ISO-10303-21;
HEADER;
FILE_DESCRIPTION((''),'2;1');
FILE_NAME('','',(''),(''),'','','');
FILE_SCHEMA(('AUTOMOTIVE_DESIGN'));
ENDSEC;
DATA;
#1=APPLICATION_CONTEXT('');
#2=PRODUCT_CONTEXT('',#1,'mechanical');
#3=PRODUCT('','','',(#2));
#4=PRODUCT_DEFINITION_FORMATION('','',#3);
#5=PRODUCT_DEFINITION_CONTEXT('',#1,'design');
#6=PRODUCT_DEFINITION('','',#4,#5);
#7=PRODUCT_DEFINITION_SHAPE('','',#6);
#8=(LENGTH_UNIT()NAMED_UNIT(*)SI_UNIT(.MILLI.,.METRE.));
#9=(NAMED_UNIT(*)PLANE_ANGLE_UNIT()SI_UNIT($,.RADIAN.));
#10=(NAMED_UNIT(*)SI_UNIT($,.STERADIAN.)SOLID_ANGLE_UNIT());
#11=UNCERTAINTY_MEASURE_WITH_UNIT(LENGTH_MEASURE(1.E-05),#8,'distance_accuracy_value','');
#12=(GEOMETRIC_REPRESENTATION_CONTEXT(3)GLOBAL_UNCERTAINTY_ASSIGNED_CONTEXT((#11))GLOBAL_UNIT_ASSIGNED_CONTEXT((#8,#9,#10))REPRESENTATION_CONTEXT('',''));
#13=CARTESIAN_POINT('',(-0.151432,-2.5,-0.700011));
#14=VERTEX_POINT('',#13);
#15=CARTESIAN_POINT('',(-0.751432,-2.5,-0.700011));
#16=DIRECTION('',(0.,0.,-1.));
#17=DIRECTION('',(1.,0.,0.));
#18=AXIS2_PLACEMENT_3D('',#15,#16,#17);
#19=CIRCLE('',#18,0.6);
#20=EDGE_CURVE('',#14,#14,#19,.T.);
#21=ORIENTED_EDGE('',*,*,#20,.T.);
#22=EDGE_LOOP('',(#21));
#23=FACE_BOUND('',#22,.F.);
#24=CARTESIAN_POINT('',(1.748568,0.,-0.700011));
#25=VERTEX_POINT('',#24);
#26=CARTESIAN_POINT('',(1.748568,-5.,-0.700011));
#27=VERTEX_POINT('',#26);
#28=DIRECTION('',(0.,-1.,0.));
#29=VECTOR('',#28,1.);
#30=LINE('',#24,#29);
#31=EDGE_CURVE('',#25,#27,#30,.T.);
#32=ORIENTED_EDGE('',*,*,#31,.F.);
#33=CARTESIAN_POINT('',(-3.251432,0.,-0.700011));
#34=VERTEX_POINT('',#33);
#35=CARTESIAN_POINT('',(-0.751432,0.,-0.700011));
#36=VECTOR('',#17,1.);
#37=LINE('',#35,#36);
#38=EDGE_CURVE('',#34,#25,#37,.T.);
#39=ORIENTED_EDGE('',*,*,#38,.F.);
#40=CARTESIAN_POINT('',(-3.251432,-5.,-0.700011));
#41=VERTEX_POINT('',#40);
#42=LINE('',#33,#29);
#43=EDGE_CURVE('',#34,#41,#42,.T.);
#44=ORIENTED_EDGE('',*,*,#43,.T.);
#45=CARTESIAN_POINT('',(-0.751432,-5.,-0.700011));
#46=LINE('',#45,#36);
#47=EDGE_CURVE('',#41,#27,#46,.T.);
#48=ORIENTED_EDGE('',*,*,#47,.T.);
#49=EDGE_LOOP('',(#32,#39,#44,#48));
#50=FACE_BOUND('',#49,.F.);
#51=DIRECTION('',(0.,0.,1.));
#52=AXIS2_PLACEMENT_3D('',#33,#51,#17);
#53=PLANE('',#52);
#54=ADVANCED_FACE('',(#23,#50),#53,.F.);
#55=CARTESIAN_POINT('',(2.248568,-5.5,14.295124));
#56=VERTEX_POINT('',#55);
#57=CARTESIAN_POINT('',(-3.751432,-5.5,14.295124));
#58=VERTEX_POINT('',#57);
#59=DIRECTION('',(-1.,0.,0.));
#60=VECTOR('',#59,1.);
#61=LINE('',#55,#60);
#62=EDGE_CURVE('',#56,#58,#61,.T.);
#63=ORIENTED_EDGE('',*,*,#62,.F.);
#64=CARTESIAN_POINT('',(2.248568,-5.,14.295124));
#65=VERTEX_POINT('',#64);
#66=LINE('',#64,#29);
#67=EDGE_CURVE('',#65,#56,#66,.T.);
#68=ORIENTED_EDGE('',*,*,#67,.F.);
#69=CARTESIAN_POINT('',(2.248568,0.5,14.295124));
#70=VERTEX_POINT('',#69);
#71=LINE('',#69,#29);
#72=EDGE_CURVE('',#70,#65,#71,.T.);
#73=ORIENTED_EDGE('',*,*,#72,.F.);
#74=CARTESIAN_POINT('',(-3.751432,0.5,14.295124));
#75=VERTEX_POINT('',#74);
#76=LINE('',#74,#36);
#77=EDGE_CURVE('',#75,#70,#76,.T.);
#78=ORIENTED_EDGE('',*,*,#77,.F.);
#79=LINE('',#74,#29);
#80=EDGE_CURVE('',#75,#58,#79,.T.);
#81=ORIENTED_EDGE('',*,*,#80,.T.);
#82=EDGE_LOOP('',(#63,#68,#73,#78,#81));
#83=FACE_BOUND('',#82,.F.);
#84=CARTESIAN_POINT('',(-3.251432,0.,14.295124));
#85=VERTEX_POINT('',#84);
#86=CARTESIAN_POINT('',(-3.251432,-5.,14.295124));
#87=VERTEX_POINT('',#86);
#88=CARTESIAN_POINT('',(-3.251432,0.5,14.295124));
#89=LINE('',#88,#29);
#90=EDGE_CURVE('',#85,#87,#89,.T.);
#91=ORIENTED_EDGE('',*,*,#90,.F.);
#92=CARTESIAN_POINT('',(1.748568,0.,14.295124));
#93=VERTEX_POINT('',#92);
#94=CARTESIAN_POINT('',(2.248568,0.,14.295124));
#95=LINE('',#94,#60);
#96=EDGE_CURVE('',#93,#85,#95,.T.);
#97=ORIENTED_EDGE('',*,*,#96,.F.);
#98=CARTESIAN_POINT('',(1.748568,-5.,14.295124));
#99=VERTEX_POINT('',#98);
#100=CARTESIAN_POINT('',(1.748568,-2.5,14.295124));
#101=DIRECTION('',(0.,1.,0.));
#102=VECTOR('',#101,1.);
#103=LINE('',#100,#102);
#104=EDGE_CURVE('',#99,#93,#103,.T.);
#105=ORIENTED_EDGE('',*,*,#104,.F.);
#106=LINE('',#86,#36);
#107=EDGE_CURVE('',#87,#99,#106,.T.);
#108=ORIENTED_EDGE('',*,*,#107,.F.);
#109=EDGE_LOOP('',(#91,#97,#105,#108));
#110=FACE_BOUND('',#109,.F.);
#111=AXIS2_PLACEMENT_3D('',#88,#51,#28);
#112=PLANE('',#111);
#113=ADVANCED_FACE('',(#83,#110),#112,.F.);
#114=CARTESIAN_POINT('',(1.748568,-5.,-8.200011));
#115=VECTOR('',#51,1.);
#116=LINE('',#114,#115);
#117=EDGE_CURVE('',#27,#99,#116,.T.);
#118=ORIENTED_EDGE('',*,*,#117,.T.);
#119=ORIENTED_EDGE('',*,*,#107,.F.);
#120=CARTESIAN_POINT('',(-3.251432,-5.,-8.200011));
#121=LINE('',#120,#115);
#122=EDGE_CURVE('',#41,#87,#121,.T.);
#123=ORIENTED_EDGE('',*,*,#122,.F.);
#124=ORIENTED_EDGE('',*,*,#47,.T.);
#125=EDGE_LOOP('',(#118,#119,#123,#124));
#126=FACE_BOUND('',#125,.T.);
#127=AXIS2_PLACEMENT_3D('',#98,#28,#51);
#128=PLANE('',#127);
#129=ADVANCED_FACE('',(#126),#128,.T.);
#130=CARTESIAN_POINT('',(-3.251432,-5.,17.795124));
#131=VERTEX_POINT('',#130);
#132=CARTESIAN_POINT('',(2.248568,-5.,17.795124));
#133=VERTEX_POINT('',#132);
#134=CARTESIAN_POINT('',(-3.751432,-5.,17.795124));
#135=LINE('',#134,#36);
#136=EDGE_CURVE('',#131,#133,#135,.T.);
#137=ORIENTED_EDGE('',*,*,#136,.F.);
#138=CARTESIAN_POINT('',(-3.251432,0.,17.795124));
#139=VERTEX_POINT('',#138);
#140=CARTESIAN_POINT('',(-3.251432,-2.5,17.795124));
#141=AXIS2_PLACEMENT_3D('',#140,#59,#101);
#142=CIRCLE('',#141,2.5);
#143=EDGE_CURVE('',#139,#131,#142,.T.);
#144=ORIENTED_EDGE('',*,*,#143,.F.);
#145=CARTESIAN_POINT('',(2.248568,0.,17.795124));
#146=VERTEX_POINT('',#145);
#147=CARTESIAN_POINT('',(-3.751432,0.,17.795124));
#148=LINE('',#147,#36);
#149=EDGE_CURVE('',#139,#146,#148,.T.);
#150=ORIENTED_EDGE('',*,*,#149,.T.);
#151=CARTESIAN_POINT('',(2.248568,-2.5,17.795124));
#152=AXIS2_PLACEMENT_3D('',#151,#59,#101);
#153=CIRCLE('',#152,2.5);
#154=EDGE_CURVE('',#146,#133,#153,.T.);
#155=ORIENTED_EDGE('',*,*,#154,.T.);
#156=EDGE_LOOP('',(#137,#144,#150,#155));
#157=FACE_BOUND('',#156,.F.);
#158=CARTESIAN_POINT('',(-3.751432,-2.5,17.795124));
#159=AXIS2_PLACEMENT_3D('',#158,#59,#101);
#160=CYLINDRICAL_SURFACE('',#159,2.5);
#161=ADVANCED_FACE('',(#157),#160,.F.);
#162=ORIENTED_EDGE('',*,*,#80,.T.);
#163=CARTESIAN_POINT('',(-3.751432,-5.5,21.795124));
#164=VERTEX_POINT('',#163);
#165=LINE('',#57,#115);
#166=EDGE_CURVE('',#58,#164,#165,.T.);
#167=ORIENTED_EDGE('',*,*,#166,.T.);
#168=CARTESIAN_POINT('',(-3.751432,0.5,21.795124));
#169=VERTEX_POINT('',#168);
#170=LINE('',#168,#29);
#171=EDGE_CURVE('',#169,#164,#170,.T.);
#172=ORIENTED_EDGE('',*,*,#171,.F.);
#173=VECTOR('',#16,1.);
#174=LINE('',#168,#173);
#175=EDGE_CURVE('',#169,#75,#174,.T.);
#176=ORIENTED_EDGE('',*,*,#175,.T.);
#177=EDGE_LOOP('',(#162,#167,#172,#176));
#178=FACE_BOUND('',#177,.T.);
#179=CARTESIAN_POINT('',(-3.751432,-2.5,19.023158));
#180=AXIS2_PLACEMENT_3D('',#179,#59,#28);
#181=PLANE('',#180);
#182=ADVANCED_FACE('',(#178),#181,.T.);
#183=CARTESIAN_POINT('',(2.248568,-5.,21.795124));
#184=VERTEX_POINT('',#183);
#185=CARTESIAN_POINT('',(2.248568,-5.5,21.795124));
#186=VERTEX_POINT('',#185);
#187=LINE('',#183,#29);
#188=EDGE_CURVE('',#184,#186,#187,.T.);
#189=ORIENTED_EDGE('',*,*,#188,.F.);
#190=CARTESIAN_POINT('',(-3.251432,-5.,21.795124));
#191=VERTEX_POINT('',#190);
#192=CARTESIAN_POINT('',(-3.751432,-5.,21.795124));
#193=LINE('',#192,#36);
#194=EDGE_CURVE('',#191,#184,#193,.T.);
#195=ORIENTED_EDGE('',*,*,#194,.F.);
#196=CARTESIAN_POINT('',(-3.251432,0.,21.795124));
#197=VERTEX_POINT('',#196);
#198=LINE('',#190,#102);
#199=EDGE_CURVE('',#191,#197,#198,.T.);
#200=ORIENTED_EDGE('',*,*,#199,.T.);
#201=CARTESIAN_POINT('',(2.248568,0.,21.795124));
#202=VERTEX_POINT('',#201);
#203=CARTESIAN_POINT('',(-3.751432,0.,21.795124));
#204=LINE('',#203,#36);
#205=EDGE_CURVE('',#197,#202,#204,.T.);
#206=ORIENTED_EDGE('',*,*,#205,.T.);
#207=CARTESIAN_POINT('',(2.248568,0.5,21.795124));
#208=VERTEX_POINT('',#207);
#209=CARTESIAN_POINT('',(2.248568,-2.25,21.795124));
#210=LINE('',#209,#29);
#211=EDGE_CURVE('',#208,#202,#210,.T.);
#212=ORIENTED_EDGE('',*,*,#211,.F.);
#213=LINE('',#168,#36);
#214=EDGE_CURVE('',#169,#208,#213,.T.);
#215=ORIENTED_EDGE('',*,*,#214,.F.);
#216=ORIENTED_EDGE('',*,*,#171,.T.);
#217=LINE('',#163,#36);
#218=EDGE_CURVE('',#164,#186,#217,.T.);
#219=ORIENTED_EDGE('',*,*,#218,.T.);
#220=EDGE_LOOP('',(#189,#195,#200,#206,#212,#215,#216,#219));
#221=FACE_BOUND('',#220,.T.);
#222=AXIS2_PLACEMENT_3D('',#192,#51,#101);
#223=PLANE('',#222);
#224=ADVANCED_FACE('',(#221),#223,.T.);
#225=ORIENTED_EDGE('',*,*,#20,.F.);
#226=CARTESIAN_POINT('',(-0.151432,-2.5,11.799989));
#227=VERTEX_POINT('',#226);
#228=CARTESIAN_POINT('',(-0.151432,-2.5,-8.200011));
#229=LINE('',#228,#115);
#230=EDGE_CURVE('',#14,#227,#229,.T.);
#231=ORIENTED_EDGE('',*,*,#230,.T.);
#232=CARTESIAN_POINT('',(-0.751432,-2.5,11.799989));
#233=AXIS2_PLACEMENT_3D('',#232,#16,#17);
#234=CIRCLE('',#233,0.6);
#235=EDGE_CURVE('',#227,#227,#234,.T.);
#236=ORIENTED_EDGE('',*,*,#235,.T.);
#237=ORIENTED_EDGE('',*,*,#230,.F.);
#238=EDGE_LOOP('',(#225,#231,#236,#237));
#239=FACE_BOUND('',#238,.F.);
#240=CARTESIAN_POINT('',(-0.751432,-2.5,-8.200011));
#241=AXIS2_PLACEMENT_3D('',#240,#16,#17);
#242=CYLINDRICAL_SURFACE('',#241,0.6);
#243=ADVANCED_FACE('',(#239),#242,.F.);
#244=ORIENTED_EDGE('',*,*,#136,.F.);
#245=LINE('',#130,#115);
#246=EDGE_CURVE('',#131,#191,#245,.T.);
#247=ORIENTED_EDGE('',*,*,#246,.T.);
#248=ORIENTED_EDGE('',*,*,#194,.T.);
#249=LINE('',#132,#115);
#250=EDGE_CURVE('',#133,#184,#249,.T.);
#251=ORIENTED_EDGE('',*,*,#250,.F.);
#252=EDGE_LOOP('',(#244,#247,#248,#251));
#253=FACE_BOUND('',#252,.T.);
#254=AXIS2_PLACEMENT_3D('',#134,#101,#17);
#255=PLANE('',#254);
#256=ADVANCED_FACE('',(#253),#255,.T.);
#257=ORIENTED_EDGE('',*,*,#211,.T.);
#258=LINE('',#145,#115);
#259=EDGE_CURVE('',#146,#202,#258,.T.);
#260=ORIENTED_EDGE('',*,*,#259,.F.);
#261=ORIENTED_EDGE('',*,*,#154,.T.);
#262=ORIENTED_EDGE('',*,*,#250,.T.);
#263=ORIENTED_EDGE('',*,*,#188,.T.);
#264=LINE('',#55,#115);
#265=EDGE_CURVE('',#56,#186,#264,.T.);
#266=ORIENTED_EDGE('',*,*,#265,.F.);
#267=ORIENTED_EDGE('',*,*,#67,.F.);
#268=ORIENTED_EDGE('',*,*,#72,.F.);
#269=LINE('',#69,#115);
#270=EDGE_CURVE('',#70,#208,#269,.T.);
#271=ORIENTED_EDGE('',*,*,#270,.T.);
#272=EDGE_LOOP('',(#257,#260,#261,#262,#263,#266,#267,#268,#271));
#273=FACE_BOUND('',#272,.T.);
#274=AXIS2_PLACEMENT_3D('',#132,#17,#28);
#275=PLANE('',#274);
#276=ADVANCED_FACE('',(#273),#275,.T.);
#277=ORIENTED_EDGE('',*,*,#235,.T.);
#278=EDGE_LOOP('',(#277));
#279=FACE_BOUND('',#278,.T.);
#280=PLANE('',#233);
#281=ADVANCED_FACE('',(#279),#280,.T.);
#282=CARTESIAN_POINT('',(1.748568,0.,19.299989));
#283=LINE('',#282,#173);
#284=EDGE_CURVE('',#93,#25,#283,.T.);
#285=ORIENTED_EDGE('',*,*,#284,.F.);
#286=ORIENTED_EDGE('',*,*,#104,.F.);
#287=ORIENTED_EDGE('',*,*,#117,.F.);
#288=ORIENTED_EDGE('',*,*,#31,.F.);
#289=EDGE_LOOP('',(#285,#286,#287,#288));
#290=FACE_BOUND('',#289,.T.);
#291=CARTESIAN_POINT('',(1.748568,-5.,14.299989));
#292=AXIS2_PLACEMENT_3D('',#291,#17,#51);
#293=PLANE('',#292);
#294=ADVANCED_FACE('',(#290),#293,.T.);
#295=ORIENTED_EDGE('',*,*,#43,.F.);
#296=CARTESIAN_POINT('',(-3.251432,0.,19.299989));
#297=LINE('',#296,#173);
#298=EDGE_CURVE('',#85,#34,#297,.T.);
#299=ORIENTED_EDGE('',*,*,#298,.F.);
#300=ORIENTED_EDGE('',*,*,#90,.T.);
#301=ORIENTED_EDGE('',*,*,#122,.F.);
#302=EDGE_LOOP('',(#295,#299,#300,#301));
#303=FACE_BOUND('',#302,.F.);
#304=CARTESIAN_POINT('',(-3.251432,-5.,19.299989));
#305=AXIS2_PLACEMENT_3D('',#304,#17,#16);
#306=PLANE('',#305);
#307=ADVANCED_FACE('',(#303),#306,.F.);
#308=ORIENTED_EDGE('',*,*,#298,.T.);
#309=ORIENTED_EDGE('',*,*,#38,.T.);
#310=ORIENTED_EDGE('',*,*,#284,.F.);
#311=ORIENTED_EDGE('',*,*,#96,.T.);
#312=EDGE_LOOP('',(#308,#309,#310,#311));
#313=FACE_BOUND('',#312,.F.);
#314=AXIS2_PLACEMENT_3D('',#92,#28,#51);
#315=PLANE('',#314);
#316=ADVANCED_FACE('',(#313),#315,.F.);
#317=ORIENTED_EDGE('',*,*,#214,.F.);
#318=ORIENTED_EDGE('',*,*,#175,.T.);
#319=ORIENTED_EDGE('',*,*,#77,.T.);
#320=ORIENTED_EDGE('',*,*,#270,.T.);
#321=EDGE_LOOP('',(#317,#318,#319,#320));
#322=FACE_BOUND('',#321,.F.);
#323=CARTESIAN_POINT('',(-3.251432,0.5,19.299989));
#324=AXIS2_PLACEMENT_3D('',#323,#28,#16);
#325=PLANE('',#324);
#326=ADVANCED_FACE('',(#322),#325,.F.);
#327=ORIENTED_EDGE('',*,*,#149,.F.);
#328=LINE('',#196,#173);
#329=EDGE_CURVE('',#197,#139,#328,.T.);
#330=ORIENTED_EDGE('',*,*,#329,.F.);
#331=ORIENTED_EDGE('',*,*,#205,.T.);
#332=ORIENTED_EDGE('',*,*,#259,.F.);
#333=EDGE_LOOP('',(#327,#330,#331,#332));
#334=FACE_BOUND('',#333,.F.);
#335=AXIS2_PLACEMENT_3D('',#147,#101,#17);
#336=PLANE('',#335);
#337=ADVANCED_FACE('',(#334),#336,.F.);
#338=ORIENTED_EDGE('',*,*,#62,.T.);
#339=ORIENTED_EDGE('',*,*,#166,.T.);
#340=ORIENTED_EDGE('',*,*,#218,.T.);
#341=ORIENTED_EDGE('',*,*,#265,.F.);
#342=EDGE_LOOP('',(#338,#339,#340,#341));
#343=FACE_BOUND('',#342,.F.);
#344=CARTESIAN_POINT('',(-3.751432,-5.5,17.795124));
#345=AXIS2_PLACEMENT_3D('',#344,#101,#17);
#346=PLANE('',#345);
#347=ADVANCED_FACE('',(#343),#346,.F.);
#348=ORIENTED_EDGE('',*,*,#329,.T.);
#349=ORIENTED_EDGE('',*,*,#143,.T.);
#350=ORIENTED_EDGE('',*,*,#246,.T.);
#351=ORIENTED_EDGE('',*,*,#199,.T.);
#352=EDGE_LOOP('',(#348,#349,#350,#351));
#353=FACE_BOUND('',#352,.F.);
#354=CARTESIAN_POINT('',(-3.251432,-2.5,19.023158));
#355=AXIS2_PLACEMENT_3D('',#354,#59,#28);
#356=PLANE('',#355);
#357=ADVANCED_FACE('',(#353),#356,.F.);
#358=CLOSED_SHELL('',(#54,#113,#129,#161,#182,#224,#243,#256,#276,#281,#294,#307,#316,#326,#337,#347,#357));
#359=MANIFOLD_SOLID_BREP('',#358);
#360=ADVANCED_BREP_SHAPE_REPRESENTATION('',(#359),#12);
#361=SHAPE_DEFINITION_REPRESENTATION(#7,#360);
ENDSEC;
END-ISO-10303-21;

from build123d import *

# Parameters (mm, degrees)
F0_W      = 5
F0_H      = 22.5
F1_DEPTH  = 5
F2_R      = 0.6
F3_DEPTH  = 20
F4_W      = 5
F4_H      = 5
F5_DEPTH  = 5
F6_W      = 5
F6_H      = 5.0048647351
F7_DEPTH  = 0.5
F9_DEPTH  = 0.5
F11_DEPTH = 0.5
F13_DEPTH = 0.5
F15_DEPTH = 25
F16_DEPTH = 4
F17_DEPTH = 7.5
F19_DEPTH = 0.5


with BuildPart() as f1:
    # F0 (on Front) → F1 (new body)
    with BuildSketch(Plane.XZ):
        with Locations((-0.7514320314, 3.0499891839)):
            Rectangle(F0_W, F0_H)
    extrude(amount=F1_DEPTH)

    # F2 (on face) → F3 (cut)
    with BuildSketch(Plane(origin=(0, 0, -8.2000108161), x_dir=(1, 0, 0), z_dir=(0, 0, -1))):
        with Locations((-0.7514320314, 2.5)):
            Circle(F2_R)
    extrude(amount=-F3_DEPTH, mode=Mode.SUBTRACT)

    # F4 (on face) → F5 (join)
    with BuildSketch(Plane.XZ.offset(5)):
        with Locations((-0.7514320314, 16.7999891839)):
            Rectangle(F4_W, F4_H)
    extrude(amount=-F5_DEPTH)

    # F6 (on face) → F7 (join)
    with BuildSketch(Plane.YZ.offset(1.7485679686)):
        with Locations((-2.5, 16.7975568164)):
            Rectangle(F6_W, F6_H)
    extrude(amount=F7_DEPTH)

    # F8 (on face) → F9 (join)
    with BuildSketch(Plane(origin=(0, 0, 0), x_dir=(-1, 0, 0), z_dir=(0, 1, 0))):
        Polygon((-2.2485679686, 14.2951244488), (-1.7485679686, 14.2951244488), (3.2514320314, 14.2951244488), (3.2514320314, 19.2999891839), (-2.2485679686, 19.2999891839), align=None)
    extrude(amount=F9_DEPTH)

    # F10 (on face) → F11 (join)
    with BuildSketch(Plane.XZ.offset(5)):
        Polygon((-3.2514320314, 14.2951244488), (1.7485679686, 14.2951244488), (2.2485679686, 14.2951244488), (2.2485679686, 19.2999891839), (-3.2514320314, 19.2999891839), align=None)
    extrude(amount=F11_DEPTH)

    # F12 (on face) → F13 (join)
    with BuildSketch(Plane(origin=(-3.2514320314, 0, 0), x_dir=(0, -1, 0), z_dir=(-1, 0, 0))):
        Polygon((-0.5, 14.2951244488), (0, 14.2951244488), (5, 14.2951244488), (5.5, 14.2951244488), (5.5, 19.2999891839), (-0.5, 19.2999891839), align=None)
    extrude(amount=F13_DEPTH)

    # F14 (on face) → F15 (cut)
    with BuildSketch(Plane(origin=(-3.7514320314, 0, 0), x_dir=(0, -1, 0), z_dir=(-1, 0, 0))):
        with BuildLine():
            Line((-0.5, 17.7951244488), (0, 17.7951244488))
            ThreePointArc((0, 17.7951244488), (2.5, 15.2951244488), (5, 17.7951244488))
            Line((5, 17.7951244488), (5.5, 17.7951244488))
            Line((5.5, 17.7951244488), (5.5, 19.2999891839))
            Line((5.5, 19.2999891839), (-0.5, 19.2999891839))
            Line((-0.5, 19.2999891839), (-0.5, 17.7951244488))
        make_face()
    extrude(amount=-F15_DEPTH, mode=Mode.SUBTRACT)

    # F16 (add): faces of the model
    f16_faces = [f1.faces().sort_by_distance(p)[0] for p in [
        (-0.7514320314, -5.25, 17.7951244488),
        (-0.7514320314, 0.25, 17.7951244488),
    ]]
    extrude(f16_faces, amount=F16_DEPTH)

    # F17 (cut): a face of the model
    f17_faces = [f1.faces().sort_by_distance(p)[0] for p in [
        (-3.1807213533, -2.5, -8.2000108161),
    ]]
    extrude(f17_faces, amount=-F17_DEPTH, mode=Mode.SUBTRACT)

    # F18 (on face) → F19 (join)
    with BuildSketch(Plane(origin=(-3.7514320314, 0, 0), x_dir=(0, -1, 0), z_dir=(-1, 0, 0))):
        with BuildLine():
            Line((5, 21.7951244488), (0, 21.7951244488))
            Line((0, 21.7951244488), (0, 17.7951244488))
            ThreePointArc((0, 17.7951244488), (2.5, 15.2951244488), (5, 17.7951244488))
            Line((5, 17.7951244488), (5, 21.7951244488))
        make_face()
    extrude(amount=-F19_DEPTH)


solid = f1.part
